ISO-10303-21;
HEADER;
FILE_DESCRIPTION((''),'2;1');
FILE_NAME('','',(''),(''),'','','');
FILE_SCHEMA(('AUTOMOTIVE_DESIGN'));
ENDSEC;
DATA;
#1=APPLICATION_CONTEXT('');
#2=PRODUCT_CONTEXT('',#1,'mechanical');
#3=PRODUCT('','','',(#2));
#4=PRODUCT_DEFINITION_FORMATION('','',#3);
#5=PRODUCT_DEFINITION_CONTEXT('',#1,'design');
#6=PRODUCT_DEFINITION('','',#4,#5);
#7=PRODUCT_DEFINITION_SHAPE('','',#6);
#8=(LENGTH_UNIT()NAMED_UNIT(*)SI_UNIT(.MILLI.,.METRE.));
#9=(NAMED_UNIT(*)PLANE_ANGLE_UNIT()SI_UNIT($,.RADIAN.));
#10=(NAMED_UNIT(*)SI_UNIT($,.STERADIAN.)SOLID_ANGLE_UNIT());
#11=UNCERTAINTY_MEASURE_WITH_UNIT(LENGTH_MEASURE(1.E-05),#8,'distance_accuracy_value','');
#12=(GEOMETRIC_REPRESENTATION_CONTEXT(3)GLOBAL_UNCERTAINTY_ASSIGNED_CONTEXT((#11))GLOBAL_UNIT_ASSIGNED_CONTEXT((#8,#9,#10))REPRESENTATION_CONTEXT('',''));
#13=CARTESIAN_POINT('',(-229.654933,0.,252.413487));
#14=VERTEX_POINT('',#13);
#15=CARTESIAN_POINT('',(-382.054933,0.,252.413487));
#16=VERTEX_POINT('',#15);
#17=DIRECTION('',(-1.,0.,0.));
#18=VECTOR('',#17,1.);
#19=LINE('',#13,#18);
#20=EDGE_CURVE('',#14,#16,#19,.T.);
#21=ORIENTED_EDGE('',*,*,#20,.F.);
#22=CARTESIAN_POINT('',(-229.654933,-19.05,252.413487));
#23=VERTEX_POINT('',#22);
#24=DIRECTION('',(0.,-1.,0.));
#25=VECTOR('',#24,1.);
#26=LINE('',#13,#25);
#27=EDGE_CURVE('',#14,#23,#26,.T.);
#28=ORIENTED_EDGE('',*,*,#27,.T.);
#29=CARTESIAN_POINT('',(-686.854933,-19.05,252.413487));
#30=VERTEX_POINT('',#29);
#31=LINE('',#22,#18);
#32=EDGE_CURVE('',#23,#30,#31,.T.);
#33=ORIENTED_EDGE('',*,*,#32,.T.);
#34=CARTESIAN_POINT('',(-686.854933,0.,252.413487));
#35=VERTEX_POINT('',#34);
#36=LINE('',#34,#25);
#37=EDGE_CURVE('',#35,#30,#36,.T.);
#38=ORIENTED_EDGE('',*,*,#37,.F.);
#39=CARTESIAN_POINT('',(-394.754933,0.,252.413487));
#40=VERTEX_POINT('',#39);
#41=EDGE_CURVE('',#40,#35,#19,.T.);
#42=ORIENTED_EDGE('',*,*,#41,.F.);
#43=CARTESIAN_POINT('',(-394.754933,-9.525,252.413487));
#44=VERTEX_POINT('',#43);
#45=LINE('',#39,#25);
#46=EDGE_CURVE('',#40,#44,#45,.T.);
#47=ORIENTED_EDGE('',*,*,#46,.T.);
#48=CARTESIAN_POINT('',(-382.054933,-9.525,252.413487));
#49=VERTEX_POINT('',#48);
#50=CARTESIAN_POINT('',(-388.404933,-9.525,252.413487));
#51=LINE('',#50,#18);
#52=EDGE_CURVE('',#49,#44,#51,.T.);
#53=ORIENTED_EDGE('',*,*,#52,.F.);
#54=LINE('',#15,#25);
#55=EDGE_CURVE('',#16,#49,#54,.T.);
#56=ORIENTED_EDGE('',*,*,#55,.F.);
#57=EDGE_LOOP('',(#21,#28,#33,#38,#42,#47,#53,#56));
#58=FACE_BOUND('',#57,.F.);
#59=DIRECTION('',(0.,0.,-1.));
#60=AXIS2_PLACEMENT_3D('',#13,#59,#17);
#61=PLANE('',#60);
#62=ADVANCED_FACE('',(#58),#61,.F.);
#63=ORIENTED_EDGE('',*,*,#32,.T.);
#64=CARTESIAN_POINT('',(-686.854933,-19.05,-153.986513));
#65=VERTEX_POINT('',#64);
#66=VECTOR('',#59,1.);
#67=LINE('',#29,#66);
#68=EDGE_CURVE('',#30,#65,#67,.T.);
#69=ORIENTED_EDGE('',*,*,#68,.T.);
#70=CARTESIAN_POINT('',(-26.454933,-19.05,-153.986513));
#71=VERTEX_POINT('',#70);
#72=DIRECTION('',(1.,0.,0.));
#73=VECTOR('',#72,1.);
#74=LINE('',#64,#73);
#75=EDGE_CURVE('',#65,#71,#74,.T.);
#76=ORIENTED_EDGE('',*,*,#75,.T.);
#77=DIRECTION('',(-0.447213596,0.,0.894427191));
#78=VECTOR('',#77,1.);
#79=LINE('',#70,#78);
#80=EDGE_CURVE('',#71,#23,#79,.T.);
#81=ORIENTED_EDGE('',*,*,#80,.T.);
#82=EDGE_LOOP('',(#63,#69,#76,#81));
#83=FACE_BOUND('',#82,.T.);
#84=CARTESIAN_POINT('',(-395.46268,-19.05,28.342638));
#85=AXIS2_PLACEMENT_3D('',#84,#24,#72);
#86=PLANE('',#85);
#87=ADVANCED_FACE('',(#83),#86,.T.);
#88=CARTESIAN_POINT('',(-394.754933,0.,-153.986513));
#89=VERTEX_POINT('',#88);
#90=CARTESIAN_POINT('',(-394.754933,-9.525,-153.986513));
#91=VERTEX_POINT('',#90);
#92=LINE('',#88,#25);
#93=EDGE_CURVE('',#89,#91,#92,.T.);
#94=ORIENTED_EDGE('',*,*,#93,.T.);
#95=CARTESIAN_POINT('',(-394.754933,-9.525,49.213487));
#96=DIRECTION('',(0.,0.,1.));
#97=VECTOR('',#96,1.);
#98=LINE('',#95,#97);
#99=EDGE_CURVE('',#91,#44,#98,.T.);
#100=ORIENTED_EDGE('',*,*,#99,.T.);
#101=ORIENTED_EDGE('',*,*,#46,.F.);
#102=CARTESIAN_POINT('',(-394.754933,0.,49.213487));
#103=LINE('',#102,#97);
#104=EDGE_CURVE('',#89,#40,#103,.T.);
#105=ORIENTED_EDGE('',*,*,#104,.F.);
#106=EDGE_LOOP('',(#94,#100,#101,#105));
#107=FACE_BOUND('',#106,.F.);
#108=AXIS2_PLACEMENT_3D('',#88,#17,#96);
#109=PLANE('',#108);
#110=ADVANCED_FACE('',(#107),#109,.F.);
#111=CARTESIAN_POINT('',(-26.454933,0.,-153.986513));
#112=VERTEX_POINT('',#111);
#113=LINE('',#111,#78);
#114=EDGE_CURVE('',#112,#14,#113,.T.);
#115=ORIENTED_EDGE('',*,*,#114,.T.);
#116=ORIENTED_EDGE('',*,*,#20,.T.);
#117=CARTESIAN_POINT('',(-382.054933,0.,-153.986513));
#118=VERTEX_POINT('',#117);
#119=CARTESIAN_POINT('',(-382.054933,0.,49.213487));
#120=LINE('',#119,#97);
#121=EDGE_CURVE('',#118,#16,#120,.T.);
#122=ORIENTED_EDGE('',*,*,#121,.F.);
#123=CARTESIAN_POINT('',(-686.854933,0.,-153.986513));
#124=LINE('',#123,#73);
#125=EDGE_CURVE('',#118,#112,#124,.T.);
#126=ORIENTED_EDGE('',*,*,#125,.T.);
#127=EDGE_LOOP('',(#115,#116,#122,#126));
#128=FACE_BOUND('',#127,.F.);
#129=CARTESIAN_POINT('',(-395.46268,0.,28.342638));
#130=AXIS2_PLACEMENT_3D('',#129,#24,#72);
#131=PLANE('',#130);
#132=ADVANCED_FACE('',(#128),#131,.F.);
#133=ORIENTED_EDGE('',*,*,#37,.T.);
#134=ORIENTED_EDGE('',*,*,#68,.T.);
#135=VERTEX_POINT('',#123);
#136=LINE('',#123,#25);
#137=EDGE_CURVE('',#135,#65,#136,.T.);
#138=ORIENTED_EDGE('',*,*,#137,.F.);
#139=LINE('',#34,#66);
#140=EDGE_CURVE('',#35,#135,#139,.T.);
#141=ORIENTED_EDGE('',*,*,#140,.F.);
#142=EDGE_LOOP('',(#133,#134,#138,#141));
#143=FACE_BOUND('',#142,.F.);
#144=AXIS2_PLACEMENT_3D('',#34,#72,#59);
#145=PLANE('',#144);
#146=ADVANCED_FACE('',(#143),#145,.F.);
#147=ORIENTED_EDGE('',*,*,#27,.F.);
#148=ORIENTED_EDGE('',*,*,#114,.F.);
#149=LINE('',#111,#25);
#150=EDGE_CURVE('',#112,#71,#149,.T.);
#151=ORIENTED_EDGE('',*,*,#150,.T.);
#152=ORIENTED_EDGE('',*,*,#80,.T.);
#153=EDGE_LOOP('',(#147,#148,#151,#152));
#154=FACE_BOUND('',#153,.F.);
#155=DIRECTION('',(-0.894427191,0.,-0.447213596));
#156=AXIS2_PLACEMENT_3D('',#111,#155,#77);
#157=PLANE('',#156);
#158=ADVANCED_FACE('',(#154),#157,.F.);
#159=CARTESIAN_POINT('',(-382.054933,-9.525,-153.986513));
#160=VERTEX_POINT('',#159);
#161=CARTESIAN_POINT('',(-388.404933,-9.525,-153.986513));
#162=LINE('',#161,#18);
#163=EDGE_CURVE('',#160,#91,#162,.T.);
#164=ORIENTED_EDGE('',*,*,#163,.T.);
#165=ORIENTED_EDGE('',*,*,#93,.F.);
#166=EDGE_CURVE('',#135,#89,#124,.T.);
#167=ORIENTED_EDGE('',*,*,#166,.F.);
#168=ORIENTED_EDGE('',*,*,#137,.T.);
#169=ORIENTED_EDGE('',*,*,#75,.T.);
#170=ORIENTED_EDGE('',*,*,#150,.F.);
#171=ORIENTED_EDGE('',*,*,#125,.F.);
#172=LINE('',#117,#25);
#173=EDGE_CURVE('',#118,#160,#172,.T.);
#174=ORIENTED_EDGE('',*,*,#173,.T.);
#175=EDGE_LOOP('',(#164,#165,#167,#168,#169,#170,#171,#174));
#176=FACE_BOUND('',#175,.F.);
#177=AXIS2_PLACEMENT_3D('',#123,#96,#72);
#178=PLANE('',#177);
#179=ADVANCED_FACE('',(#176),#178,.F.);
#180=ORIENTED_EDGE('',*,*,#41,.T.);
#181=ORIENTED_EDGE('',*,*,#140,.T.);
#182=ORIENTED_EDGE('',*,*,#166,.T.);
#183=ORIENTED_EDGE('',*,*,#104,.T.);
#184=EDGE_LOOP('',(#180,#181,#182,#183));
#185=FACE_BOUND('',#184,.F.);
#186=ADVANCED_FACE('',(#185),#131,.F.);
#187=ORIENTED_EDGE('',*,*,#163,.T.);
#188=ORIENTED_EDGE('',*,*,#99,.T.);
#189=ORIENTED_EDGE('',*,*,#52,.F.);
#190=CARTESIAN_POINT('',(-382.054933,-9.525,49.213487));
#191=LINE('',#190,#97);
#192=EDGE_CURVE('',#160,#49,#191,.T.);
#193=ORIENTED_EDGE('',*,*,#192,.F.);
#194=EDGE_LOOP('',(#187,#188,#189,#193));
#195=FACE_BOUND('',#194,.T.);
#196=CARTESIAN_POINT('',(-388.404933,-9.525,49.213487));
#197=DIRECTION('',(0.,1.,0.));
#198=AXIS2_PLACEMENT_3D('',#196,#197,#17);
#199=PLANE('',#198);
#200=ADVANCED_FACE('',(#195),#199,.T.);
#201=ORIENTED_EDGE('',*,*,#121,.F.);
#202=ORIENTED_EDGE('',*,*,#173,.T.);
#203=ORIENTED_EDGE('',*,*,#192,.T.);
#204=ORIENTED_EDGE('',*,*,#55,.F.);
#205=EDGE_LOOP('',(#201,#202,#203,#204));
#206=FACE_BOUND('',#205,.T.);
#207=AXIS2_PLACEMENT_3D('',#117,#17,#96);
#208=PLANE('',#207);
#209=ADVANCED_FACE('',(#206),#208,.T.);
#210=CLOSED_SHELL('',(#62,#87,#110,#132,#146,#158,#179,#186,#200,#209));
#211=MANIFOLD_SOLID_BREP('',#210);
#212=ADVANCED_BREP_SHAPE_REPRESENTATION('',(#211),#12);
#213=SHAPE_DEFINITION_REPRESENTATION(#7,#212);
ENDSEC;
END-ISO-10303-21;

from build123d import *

# Parameters (mm, degrees)
F1_DEPTH = 19.05
F2_W     = 12.7
F2_H     = 406.4
F3_DEPTH = 9.525


# Not quite as in the source:
# - a feature names something its author has since deleted; it is built from what else it names


with BuildPart() as f1:
    # F0 (on Front) → F1 (new body)
    with BuildSketch(Plane.XZ):
        Polygon((-229.6549332498, 252.4134865394), (-356.6549332498, 252.4134865394), (-686.8549332498, 252.4134865394), (-686.8549332498, -153.9865134606), (-356.6549332498, -153.9865134606), (-26.4549332498, -153.9865134606), align=None)
    extrude(amount=F1_DEPTH)

    # F2 (on face) → F3 (cut)
    with BuildSketch(Plane(origin=(0, 0, 0), x_dir=(-1, 0, 0), z_dir=(0, 1, 0))):
        with Locations((388.4049332498, 49.2134865394)):
            Rectangle(F2_W, F2_H)
    extrude(amount=-F3_DEPTH, mode=Mode.SUBTRACT)


solid = f1.part
